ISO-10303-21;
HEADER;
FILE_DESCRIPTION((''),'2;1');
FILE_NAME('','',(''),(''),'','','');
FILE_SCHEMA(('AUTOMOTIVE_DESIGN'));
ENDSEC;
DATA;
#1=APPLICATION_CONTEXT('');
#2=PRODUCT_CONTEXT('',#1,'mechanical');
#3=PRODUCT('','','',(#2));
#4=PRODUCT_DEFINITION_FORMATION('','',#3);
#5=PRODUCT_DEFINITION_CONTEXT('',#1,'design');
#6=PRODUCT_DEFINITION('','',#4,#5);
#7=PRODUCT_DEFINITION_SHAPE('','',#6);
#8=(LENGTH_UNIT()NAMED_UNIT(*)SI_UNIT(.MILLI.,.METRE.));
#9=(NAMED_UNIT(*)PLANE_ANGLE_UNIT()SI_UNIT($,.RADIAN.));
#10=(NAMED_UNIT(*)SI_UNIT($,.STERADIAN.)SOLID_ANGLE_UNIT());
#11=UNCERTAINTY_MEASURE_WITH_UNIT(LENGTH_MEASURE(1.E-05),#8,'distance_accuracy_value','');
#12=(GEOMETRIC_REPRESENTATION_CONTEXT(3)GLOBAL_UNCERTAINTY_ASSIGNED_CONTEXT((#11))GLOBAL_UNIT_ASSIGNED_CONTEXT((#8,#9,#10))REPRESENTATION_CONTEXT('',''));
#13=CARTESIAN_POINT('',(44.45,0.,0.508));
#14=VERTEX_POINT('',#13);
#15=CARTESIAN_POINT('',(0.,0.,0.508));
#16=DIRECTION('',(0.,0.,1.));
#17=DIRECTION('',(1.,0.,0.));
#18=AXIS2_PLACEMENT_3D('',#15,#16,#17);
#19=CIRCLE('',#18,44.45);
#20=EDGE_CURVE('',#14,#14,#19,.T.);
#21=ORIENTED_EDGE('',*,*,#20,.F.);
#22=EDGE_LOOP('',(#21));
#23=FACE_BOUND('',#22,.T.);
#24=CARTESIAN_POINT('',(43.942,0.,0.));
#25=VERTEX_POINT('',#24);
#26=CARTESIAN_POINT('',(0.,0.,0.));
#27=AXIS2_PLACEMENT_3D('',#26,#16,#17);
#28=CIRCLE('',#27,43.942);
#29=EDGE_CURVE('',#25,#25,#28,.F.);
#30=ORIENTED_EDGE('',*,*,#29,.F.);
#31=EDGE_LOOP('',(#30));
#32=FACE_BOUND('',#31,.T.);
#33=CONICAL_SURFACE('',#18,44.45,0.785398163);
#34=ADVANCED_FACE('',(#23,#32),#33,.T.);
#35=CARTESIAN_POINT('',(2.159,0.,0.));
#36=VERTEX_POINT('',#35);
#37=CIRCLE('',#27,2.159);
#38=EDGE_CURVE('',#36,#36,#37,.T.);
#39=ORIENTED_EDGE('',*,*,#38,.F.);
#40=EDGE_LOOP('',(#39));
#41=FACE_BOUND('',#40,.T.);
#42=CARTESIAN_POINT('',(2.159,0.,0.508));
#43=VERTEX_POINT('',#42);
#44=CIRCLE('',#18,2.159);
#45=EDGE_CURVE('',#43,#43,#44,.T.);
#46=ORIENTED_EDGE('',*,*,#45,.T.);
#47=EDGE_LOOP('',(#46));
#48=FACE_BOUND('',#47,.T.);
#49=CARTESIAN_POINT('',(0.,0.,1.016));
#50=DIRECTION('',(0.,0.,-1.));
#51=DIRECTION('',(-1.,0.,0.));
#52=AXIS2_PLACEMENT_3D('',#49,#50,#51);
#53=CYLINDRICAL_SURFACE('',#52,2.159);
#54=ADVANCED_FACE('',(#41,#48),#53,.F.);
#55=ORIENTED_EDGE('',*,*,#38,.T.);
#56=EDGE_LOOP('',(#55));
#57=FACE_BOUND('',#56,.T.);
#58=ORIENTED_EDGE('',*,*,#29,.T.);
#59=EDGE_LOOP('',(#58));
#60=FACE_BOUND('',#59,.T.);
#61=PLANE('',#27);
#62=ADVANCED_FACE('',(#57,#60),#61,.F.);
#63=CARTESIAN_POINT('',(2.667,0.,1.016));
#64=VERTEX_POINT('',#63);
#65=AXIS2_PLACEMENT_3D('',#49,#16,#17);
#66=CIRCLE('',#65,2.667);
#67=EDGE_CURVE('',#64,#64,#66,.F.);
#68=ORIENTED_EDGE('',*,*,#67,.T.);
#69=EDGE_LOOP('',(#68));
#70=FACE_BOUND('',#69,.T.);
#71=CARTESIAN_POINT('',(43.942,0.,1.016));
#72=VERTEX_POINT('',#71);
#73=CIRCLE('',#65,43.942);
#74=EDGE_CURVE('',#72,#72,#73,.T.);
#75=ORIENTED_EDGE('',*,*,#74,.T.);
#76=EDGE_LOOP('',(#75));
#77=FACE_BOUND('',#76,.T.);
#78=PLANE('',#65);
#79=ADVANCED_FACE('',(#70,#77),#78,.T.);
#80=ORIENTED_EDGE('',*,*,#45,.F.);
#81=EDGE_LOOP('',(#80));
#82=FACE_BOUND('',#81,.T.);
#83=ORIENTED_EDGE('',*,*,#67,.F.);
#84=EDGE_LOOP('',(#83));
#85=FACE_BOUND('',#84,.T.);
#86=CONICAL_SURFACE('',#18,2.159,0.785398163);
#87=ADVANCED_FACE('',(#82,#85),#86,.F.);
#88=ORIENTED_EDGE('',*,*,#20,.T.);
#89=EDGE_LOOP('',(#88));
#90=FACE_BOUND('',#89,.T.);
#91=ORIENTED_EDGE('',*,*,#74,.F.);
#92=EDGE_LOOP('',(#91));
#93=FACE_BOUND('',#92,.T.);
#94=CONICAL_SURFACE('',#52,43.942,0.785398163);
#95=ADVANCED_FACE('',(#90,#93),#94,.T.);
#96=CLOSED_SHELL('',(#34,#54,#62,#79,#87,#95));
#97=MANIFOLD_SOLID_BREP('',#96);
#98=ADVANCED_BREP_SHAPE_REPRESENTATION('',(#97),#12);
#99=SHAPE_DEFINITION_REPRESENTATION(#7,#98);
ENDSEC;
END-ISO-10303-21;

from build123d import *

# Parameters (mm, degrees)
SKETCH1_R           = 44.45
SKETCH1_R_2         = 2.159
BOSS_EXTRUDE1_DEPTH = 1.016
CHAMFER2_SIZE       = 0.508


with BuildPart() as part:
    # Sketch1 → Boss-Extrude1 (new body)
    with BuildSketch(Plane.XY):
        Circle(SKETCH1_R)
        Circle(SKETCH1_R_2, mode=Mode.SUBTRACT)
    extrude(amount=BOSS_EXTRUDE1_DEPTH)

    # Chamfer2
    chamfer2_edges = [part.edges().sort_by_distance(p)[0] for p in [
        (-44.45, 0, 0),
        (-44.45, 0, 1.016),
        (-2.159, 0, 1.016),
    ]]
    chamfer(chamfer2_edges, length=CHAMFER2_SIZE - 0.0001)  # a hair under: the kernel refuses the full size


solid = part.part
